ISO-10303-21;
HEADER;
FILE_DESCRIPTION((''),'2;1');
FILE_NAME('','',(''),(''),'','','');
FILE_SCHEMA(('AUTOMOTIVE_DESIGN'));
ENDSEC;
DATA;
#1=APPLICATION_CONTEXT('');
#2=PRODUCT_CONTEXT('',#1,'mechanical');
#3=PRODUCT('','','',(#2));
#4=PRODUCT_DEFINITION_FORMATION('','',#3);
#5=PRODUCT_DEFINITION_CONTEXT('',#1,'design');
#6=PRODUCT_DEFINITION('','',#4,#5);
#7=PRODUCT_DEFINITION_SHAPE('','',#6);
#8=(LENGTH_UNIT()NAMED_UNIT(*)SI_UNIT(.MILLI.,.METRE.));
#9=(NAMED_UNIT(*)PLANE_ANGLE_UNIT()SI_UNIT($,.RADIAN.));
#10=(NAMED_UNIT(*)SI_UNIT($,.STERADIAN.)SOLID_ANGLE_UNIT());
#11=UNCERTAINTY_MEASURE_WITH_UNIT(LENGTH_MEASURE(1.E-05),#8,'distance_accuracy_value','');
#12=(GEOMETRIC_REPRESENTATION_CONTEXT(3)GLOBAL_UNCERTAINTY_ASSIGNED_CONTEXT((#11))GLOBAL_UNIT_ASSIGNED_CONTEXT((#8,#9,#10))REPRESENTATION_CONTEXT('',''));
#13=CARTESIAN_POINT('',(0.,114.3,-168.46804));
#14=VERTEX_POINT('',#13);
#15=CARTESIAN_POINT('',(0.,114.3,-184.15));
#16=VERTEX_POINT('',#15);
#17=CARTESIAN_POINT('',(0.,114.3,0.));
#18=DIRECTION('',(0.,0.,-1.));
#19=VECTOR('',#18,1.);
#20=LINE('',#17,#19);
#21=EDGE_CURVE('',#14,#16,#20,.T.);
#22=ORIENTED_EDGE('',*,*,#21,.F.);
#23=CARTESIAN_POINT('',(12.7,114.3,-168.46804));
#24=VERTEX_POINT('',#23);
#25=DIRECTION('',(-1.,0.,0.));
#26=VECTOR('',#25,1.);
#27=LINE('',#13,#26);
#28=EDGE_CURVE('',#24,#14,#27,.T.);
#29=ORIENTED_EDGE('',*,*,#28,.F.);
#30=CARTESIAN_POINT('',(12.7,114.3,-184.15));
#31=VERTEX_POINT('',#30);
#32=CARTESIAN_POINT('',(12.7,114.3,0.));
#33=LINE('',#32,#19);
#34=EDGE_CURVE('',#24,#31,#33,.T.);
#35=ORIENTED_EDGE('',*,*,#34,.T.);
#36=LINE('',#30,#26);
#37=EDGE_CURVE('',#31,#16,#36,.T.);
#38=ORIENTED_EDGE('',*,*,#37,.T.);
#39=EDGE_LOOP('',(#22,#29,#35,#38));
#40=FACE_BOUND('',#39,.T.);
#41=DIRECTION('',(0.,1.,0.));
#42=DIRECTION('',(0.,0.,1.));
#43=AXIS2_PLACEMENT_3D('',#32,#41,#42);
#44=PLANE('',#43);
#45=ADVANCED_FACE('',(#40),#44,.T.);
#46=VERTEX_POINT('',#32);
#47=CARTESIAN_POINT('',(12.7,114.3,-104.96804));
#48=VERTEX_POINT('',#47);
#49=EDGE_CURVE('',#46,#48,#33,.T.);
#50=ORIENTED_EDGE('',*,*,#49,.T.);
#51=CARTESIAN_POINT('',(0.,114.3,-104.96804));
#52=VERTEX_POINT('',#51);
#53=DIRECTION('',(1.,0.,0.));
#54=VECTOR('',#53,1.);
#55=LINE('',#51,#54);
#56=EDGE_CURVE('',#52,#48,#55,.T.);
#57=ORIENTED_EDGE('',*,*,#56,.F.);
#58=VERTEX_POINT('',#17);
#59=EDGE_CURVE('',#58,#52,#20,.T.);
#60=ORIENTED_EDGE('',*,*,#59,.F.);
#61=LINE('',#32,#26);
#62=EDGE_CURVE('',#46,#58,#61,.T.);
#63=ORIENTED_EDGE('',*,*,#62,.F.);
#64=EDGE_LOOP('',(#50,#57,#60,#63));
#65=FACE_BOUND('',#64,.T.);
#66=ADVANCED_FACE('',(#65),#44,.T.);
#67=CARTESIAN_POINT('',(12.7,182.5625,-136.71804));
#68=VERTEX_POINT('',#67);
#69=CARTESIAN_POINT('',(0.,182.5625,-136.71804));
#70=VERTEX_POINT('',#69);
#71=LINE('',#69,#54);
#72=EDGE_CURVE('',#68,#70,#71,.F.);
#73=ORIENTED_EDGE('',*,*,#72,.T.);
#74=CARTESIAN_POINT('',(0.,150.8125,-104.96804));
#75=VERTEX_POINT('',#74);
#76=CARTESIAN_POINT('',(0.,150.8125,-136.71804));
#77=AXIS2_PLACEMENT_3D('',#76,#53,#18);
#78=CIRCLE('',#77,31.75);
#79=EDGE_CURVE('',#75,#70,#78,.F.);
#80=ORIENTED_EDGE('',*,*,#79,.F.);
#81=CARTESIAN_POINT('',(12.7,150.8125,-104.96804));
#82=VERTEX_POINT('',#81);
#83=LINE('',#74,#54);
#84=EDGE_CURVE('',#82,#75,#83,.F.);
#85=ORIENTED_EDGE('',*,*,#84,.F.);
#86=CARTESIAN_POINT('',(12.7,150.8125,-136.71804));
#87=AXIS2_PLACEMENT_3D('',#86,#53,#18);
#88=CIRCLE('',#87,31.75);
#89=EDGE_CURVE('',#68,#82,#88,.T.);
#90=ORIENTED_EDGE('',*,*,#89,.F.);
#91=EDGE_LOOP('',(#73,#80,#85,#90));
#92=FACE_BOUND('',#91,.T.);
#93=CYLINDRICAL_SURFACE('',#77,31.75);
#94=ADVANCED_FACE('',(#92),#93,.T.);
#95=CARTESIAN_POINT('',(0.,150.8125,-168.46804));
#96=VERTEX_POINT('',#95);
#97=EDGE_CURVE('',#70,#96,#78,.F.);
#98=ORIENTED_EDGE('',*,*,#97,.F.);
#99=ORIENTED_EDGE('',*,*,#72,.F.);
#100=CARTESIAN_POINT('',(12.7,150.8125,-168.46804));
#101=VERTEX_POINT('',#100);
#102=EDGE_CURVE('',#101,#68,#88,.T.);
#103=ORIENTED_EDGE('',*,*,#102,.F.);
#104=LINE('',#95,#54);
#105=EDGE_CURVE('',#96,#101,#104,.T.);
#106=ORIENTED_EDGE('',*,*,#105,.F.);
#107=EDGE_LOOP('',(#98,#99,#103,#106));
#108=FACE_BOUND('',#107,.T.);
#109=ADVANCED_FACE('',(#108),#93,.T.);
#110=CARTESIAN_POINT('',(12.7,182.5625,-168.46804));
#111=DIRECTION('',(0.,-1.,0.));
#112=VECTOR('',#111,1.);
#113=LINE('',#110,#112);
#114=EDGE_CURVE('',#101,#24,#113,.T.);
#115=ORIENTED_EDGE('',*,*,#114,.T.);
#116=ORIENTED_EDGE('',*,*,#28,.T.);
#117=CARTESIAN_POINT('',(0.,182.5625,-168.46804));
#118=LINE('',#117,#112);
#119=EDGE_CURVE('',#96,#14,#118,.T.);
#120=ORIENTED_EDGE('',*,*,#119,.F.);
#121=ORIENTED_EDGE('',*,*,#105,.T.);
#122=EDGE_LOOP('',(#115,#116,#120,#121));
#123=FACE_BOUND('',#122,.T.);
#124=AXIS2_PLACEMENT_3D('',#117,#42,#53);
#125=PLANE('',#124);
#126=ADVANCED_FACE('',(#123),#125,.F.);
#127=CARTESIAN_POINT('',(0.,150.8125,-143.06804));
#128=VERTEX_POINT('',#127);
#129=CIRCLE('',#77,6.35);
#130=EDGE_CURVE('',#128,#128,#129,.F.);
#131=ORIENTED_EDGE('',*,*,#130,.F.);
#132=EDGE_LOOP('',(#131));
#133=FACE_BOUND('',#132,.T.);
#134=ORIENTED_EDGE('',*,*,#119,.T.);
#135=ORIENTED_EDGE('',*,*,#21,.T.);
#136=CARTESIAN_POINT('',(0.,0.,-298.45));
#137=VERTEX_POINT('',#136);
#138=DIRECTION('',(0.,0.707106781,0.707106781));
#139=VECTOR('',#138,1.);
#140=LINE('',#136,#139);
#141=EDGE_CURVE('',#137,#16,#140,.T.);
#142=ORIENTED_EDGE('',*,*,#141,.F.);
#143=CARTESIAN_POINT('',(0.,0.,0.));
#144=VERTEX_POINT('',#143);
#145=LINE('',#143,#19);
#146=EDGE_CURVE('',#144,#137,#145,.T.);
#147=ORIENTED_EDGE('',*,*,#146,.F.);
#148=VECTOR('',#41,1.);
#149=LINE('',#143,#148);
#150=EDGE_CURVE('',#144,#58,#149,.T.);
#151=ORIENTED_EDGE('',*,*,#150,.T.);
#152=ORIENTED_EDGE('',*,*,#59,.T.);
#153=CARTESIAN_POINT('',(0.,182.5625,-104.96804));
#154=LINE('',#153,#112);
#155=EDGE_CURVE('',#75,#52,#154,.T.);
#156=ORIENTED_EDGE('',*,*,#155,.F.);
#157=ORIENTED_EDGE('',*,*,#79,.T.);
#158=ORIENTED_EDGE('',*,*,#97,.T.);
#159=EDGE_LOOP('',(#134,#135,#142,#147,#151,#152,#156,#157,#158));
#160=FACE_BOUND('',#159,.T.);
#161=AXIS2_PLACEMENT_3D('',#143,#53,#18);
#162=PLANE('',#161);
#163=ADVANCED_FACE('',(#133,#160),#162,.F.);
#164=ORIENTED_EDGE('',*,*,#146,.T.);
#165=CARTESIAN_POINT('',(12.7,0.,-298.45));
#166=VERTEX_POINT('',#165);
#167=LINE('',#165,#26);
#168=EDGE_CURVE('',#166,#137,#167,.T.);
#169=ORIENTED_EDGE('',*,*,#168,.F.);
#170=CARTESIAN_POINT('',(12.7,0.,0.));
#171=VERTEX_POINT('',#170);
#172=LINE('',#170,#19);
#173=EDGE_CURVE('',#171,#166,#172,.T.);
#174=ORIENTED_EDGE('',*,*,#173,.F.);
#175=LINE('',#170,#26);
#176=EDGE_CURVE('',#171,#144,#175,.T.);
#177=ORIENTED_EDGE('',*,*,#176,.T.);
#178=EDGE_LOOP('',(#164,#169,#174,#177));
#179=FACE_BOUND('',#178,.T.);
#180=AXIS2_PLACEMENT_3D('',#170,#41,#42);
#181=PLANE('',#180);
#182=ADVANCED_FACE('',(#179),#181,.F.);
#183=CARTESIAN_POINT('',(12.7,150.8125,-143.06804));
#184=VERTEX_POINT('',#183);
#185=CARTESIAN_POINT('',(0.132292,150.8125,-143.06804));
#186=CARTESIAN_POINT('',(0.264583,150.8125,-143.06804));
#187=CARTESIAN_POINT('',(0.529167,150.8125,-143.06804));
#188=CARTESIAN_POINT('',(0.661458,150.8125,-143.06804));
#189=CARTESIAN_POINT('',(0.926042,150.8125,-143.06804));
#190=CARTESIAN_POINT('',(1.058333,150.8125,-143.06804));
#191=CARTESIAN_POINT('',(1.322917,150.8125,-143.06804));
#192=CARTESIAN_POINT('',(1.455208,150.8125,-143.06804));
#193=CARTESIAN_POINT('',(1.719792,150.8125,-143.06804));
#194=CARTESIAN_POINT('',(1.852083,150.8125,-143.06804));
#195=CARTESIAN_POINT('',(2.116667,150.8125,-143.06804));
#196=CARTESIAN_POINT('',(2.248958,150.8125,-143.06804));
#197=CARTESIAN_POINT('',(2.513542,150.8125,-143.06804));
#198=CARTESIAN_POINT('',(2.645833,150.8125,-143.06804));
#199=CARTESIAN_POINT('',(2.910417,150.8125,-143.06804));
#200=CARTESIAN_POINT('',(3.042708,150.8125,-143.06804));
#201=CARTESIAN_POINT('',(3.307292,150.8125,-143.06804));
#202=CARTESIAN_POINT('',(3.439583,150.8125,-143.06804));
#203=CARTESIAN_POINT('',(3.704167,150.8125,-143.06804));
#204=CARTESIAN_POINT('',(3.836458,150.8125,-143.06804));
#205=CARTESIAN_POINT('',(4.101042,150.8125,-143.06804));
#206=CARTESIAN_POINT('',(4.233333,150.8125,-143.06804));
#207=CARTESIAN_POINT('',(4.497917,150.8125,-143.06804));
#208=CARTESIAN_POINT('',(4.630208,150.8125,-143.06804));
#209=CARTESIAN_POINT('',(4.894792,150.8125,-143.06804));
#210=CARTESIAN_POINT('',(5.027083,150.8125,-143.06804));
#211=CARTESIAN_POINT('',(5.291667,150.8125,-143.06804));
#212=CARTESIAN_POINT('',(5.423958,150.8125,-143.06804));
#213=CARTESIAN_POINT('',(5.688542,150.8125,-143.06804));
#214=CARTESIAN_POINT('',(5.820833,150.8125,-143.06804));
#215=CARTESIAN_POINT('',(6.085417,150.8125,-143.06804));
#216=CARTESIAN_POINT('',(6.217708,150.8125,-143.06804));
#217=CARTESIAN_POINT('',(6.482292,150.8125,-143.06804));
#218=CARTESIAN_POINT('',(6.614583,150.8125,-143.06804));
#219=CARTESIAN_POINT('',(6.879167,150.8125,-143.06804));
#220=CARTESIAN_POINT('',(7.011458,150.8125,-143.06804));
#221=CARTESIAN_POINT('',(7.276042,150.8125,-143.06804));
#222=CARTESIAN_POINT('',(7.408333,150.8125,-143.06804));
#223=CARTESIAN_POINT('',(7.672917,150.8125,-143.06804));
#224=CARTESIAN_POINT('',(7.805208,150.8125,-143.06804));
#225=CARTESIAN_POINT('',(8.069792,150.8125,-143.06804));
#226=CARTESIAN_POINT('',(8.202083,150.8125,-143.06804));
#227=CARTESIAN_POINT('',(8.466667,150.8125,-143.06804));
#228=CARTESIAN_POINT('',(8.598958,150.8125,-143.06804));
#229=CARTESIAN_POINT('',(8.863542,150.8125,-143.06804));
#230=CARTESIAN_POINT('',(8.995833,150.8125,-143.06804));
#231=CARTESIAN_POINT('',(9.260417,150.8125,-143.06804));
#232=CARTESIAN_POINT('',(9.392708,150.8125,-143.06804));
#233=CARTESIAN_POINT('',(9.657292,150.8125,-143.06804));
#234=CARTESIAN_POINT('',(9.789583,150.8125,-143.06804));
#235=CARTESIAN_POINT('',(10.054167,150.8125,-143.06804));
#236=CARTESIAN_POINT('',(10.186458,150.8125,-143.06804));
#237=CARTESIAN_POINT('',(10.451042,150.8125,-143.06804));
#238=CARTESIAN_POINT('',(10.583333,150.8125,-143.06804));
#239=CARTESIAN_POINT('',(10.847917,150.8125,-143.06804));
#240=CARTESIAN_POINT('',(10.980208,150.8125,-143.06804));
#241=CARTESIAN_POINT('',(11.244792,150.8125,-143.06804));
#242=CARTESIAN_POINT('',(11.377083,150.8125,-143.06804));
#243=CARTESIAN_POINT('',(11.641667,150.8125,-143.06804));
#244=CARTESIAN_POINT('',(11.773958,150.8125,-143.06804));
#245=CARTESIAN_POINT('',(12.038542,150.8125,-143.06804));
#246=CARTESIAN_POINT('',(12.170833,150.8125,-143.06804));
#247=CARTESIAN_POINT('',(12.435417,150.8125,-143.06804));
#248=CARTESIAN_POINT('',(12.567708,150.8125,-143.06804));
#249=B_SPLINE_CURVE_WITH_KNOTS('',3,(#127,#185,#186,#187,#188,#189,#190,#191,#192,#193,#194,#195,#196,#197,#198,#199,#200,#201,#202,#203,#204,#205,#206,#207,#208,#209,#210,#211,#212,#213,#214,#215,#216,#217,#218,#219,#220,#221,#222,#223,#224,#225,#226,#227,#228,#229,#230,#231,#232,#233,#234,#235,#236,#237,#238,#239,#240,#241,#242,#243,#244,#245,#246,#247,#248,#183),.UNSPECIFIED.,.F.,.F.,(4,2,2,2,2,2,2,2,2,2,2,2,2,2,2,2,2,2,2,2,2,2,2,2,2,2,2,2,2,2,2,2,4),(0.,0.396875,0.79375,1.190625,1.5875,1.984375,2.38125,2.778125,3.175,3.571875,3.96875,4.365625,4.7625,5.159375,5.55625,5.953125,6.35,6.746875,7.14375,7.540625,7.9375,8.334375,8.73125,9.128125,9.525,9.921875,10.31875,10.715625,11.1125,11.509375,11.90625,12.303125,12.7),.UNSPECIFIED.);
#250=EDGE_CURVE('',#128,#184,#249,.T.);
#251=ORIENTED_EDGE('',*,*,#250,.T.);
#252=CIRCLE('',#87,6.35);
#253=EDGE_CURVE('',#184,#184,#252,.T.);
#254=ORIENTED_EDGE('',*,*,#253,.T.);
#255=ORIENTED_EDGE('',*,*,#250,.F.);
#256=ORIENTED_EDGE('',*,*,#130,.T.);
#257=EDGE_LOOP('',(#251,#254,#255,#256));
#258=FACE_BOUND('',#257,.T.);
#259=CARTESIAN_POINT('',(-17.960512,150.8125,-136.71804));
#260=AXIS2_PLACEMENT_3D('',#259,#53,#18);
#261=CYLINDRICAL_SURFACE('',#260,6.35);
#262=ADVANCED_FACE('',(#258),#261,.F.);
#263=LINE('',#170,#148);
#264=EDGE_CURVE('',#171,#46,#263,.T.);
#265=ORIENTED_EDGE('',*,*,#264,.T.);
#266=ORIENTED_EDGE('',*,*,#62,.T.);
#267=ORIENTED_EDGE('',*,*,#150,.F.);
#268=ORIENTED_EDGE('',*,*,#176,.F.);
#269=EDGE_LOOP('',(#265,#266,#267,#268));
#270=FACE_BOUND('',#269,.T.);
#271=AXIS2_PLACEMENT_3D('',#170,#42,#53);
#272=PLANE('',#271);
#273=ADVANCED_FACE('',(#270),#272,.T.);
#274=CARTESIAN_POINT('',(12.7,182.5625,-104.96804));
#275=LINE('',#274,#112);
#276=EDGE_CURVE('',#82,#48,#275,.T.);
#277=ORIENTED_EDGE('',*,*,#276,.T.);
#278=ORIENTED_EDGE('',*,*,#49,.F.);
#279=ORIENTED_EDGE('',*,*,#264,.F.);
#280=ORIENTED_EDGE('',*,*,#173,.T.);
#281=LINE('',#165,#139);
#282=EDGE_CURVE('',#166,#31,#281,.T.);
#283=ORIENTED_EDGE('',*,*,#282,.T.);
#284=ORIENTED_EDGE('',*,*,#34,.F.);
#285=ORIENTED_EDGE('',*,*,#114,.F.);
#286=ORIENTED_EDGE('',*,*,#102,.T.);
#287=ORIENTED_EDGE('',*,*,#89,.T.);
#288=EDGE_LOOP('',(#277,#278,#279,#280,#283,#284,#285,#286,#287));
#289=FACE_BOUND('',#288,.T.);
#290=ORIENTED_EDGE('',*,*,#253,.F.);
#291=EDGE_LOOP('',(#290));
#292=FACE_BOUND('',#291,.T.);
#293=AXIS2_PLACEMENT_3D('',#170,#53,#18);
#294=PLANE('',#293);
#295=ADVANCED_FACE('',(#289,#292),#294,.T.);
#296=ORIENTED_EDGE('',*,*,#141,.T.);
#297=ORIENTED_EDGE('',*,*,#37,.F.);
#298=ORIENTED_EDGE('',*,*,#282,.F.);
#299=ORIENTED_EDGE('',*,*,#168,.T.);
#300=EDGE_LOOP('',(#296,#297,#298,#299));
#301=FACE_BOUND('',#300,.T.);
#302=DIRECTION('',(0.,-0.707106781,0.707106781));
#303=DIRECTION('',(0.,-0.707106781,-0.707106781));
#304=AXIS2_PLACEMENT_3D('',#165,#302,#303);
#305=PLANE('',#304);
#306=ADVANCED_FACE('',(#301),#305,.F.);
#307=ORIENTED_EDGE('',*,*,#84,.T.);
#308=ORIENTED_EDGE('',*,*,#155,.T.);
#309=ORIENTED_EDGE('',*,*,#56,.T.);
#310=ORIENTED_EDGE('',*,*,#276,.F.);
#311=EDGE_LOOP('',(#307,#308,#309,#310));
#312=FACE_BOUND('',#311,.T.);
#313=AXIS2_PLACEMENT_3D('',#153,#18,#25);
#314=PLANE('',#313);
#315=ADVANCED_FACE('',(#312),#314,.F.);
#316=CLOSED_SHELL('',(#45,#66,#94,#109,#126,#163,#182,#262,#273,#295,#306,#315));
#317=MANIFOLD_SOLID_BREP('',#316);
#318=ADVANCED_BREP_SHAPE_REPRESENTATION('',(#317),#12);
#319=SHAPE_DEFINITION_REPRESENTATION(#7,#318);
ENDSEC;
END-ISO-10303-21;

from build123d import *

# Parameters (mm, degrees)
MAIN_DEPTH  = 12.7
SKETCH2_W   = 12.7
SKETCH2_H   = 63.5
STAND_DEPTH = 68.2625
SKETCH3_R   = 6.35
AXLE_DEPTH  = 12.7
FILLET1_R   = 31.75
FILLET2_R   = 31.75


with BuildPart() as part:
    # Sketch1 → main (new body)
    with BuildSketch(Plane(origin=(0, 0, 0), x_dir=(0, 0, -1), z_dir=(1, 0, 0))):
        Polygon((0, 0), (298.45, 0), (184.15, 114.3), (0, 114.3), align=None)
    extrude(amount=MAIN_DEPTH)

    # Sketch2 → stand (add)
    with BuildSketch(Plane(origin=(0, 114.3, 0), x_dir=(1, 0, 0), z_dir=(0, 1, 0))):
        with Locations((6.35, 136.71804)):
            Rectangle(SKETCH2_W, SKETCH2_H)
    extrude(amount=STAND_DEPTH)

    # Sketch3 → axle (cut)
    with BuildSketch(Plane(origin=(12.7, 0, 0), x_dir=(0, 0, -1), z_dir=(1, 0, 0))):
        with Locations((136.71804, 150.8125)):
            Circle(SKETCH3_R)
    extrude(amount=-AXLE_DEPTH, mode=Mode.SUBTRACT)

    # Fillet1
    fillet1_edges = [part.edges().sort_by_distance(p)[0] for p in [
        (6.35, 182.5625, -168.46804),
    ]]
    fillet(fillet1_edges, radius=FILLET1_R)

    # Fillet2
    fillet2_edges = [part.edges().sort_by_distance(p)[0] for p in [
        (6.35, 182.5625, -104.96804),
    ]]
    fillet(fillet2_edges, radius=FILLET2_R - 0.0001)  # a hair under: the kernel refuses the full size


solid = part.part
